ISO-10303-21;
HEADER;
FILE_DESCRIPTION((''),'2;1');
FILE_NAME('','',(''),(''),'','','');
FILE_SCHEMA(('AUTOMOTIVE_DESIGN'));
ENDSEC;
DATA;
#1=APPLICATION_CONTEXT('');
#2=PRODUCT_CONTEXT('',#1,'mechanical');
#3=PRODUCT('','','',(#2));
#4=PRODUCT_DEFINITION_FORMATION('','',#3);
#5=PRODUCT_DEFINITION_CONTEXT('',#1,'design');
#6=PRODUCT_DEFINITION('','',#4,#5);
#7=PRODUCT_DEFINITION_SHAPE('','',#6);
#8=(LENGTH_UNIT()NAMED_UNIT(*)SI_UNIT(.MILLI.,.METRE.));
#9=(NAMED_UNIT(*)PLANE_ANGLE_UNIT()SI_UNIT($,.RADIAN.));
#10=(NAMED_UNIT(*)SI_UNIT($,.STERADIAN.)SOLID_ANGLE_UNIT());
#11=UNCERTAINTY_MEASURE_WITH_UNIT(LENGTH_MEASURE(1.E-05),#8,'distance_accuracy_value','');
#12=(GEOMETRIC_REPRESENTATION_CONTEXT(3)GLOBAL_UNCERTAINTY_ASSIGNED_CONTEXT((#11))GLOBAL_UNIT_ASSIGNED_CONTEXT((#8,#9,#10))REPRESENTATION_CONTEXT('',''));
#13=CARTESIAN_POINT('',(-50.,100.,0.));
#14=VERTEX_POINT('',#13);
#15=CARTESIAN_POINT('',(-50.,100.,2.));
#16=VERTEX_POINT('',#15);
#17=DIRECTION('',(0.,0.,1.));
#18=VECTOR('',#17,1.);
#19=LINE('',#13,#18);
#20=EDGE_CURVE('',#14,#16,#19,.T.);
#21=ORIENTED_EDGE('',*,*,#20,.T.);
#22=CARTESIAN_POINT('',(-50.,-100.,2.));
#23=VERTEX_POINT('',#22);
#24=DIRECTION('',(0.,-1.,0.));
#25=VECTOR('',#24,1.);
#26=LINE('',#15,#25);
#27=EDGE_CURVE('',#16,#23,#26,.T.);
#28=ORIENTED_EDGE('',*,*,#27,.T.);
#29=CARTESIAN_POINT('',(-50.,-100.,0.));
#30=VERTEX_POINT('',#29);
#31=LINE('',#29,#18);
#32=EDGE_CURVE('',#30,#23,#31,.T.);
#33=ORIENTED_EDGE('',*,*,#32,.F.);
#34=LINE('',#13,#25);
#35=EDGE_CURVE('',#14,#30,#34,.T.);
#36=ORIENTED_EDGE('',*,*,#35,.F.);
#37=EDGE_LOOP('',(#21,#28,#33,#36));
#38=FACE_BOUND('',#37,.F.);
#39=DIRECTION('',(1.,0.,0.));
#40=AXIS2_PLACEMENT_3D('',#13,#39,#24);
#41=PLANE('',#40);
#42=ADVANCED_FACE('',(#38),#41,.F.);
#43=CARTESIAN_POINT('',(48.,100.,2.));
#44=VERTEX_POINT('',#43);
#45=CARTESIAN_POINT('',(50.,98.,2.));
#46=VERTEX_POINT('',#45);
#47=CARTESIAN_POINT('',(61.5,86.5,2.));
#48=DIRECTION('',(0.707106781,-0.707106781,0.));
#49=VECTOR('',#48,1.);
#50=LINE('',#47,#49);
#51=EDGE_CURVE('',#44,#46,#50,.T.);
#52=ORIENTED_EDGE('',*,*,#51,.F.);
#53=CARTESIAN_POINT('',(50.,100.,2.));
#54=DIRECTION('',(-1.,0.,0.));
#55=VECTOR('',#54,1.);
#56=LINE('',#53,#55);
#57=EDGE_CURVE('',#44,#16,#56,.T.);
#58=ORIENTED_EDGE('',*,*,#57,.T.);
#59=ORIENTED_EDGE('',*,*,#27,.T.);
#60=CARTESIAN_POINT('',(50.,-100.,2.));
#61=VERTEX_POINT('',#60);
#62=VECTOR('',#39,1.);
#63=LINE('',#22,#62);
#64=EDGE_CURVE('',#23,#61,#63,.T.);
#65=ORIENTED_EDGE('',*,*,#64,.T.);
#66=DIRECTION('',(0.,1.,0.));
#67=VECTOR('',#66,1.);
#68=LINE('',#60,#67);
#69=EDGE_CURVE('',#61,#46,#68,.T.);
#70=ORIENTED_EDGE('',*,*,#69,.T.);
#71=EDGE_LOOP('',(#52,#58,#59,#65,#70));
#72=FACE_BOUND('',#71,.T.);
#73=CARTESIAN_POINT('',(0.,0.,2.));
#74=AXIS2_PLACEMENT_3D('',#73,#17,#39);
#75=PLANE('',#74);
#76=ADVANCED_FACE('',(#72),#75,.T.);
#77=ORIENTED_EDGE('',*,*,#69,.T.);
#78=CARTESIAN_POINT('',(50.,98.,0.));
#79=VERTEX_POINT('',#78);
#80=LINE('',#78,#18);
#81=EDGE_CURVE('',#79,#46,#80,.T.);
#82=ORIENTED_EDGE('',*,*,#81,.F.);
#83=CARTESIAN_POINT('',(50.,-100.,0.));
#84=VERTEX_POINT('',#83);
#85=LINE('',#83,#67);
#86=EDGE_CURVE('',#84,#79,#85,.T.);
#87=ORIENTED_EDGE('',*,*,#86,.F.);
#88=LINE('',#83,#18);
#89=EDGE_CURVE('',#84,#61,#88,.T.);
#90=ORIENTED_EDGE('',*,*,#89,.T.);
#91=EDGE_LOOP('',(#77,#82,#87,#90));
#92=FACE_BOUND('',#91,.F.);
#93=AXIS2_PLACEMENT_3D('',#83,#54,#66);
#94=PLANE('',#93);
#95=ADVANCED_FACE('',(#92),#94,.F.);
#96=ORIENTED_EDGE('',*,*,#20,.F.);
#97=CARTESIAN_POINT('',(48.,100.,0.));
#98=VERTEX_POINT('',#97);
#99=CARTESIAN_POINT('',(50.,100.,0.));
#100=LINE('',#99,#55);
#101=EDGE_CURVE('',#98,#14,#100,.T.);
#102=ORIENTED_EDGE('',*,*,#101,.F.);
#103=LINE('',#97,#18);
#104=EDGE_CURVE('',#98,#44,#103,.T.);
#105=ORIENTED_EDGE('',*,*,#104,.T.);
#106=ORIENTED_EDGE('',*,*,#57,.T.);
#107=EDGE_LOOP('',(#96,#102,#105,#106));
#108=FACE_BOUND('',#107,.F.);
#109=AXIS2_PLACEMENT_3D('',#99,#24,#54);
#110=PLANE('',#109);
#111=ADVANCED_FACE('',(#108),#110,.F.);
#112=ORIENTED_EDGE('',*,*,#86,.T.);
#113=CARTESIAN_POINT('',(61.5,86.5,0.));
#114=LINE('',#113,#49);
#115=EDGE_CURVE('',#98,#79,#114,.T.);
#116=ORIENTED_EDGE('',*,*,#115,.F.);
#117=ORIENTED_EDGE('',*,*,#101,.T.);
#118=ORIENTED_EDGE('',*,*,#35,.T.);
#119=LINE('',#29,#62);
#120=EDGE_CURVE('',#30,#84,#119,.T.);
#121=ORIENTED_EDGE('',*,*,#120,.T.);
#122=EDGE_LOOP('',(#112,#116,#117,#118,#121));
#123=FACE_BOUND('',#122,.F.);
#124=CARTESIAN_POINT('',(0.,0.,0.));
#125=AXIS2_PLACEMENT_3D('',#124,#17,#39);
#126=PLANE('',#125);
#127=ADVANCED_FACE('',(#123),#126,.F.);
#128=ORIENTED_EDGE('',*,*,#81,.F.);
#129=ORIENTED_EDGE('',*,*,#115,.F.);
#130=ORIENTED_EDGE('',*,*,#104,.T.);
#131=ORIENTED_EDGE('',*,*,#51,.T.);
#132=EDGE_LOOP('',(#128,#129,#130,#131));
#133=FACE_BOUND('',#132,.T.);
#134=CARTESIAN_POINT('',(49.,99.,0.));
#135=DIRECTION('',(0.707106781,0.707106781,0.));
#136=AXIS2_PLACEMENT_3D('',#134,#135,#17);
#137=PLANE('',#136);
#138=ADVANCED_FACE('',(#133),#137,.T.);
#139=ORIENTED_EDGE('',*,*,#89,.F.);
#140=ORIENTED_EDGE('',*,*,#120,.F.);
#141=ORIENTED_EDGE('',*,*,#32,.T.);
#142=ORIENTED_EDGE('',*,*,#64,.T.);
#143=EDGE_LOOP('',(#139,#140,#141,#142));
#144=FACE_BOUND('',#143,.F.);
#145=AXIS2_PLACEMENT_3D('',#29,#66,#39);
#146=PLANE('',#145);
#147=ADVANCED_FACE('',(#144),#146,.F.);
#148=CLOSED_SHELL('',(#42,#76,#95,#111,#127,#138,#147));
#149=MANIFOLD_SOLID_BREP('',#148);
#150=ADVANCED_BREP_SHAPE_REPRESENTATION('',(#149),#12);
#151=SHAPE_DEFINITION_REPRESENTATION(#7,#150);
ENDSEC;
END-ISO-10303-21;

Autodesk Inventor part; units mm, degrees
ref_plane "YZ Plane" through (0, 0, 0) normal (1, 0, 0) x (0, 1, 0)
ref_plane "XZ Plane" through (0, 0, 0) normal (0, 1, 0) x (-1, 0, 0)
ref_plane "XY Plane" through (0, 0, 0) normal (0, 0, 1) x (1, 0, 0)
sketch "Sketch1" plane through (0, 0, 0) normal (0, 0, 1) x (1, 0, 0)
  line L0 (-50, -100) -> (50, -100)
  line L1 (50, -100) -> (50, 100)
  line L2 (50, 100) -> (-50, 100)
  line L3 (-50, 100) -> (-50, -100)
  line L4 (-50, -100) -> (50, 100) construction
  line L5 (50, -100) -> (-50, 100) construction
  point P0 (0, 0)
  dimension "d0" = 100
  dimension "d1" = 200
extrude "Plate1" add sketch "Sketch1" along normal blind 2
chamfer "Chamfer1" distance 2 angle 45 1 edges at (50, 100, 1)
sketch "Sketch2" plane through (0, 0, 0) normal (0, 0, -1) x (-1, 0, 0)
  line L0 (-27.4755, 69.5251) -> (-8.9545, 69.5251) construction
  line L1 (-8.9545, 69.5251) -> (-8.9545, 65.7727) construction
  line L2 (-8.9545, 65.7727) -> (-27.4755, 65.7727) construction
  line L3 (-27.4755, 65.7727) -> (-27.4755, 69.5251) construction
  point P0 (0, 0)
mark "Mark1"
equation "\"d2\" = Thickness"
equation "\"BendReliefWidth\" = Thickness"
equation "\"BendReliefDepth\" = 0.5 * Thickness"
equation "\"CornerReliefSize\" = 4 * Thickness"
equation "\"MinimumRemnant\" = 2 * Thickness"
equation "\"TransitionRadius\" = BendRadius"
equation "\"JacobiRadiusSize\" = BendRadius"
equation "\"GapSize\" = Thickness"
equation "\"Thickness\" = 2"
equation "\"BendRadius\" = 2.75"
properties part number "Sheet Metal (DIN)" material "Stainless Steel"
